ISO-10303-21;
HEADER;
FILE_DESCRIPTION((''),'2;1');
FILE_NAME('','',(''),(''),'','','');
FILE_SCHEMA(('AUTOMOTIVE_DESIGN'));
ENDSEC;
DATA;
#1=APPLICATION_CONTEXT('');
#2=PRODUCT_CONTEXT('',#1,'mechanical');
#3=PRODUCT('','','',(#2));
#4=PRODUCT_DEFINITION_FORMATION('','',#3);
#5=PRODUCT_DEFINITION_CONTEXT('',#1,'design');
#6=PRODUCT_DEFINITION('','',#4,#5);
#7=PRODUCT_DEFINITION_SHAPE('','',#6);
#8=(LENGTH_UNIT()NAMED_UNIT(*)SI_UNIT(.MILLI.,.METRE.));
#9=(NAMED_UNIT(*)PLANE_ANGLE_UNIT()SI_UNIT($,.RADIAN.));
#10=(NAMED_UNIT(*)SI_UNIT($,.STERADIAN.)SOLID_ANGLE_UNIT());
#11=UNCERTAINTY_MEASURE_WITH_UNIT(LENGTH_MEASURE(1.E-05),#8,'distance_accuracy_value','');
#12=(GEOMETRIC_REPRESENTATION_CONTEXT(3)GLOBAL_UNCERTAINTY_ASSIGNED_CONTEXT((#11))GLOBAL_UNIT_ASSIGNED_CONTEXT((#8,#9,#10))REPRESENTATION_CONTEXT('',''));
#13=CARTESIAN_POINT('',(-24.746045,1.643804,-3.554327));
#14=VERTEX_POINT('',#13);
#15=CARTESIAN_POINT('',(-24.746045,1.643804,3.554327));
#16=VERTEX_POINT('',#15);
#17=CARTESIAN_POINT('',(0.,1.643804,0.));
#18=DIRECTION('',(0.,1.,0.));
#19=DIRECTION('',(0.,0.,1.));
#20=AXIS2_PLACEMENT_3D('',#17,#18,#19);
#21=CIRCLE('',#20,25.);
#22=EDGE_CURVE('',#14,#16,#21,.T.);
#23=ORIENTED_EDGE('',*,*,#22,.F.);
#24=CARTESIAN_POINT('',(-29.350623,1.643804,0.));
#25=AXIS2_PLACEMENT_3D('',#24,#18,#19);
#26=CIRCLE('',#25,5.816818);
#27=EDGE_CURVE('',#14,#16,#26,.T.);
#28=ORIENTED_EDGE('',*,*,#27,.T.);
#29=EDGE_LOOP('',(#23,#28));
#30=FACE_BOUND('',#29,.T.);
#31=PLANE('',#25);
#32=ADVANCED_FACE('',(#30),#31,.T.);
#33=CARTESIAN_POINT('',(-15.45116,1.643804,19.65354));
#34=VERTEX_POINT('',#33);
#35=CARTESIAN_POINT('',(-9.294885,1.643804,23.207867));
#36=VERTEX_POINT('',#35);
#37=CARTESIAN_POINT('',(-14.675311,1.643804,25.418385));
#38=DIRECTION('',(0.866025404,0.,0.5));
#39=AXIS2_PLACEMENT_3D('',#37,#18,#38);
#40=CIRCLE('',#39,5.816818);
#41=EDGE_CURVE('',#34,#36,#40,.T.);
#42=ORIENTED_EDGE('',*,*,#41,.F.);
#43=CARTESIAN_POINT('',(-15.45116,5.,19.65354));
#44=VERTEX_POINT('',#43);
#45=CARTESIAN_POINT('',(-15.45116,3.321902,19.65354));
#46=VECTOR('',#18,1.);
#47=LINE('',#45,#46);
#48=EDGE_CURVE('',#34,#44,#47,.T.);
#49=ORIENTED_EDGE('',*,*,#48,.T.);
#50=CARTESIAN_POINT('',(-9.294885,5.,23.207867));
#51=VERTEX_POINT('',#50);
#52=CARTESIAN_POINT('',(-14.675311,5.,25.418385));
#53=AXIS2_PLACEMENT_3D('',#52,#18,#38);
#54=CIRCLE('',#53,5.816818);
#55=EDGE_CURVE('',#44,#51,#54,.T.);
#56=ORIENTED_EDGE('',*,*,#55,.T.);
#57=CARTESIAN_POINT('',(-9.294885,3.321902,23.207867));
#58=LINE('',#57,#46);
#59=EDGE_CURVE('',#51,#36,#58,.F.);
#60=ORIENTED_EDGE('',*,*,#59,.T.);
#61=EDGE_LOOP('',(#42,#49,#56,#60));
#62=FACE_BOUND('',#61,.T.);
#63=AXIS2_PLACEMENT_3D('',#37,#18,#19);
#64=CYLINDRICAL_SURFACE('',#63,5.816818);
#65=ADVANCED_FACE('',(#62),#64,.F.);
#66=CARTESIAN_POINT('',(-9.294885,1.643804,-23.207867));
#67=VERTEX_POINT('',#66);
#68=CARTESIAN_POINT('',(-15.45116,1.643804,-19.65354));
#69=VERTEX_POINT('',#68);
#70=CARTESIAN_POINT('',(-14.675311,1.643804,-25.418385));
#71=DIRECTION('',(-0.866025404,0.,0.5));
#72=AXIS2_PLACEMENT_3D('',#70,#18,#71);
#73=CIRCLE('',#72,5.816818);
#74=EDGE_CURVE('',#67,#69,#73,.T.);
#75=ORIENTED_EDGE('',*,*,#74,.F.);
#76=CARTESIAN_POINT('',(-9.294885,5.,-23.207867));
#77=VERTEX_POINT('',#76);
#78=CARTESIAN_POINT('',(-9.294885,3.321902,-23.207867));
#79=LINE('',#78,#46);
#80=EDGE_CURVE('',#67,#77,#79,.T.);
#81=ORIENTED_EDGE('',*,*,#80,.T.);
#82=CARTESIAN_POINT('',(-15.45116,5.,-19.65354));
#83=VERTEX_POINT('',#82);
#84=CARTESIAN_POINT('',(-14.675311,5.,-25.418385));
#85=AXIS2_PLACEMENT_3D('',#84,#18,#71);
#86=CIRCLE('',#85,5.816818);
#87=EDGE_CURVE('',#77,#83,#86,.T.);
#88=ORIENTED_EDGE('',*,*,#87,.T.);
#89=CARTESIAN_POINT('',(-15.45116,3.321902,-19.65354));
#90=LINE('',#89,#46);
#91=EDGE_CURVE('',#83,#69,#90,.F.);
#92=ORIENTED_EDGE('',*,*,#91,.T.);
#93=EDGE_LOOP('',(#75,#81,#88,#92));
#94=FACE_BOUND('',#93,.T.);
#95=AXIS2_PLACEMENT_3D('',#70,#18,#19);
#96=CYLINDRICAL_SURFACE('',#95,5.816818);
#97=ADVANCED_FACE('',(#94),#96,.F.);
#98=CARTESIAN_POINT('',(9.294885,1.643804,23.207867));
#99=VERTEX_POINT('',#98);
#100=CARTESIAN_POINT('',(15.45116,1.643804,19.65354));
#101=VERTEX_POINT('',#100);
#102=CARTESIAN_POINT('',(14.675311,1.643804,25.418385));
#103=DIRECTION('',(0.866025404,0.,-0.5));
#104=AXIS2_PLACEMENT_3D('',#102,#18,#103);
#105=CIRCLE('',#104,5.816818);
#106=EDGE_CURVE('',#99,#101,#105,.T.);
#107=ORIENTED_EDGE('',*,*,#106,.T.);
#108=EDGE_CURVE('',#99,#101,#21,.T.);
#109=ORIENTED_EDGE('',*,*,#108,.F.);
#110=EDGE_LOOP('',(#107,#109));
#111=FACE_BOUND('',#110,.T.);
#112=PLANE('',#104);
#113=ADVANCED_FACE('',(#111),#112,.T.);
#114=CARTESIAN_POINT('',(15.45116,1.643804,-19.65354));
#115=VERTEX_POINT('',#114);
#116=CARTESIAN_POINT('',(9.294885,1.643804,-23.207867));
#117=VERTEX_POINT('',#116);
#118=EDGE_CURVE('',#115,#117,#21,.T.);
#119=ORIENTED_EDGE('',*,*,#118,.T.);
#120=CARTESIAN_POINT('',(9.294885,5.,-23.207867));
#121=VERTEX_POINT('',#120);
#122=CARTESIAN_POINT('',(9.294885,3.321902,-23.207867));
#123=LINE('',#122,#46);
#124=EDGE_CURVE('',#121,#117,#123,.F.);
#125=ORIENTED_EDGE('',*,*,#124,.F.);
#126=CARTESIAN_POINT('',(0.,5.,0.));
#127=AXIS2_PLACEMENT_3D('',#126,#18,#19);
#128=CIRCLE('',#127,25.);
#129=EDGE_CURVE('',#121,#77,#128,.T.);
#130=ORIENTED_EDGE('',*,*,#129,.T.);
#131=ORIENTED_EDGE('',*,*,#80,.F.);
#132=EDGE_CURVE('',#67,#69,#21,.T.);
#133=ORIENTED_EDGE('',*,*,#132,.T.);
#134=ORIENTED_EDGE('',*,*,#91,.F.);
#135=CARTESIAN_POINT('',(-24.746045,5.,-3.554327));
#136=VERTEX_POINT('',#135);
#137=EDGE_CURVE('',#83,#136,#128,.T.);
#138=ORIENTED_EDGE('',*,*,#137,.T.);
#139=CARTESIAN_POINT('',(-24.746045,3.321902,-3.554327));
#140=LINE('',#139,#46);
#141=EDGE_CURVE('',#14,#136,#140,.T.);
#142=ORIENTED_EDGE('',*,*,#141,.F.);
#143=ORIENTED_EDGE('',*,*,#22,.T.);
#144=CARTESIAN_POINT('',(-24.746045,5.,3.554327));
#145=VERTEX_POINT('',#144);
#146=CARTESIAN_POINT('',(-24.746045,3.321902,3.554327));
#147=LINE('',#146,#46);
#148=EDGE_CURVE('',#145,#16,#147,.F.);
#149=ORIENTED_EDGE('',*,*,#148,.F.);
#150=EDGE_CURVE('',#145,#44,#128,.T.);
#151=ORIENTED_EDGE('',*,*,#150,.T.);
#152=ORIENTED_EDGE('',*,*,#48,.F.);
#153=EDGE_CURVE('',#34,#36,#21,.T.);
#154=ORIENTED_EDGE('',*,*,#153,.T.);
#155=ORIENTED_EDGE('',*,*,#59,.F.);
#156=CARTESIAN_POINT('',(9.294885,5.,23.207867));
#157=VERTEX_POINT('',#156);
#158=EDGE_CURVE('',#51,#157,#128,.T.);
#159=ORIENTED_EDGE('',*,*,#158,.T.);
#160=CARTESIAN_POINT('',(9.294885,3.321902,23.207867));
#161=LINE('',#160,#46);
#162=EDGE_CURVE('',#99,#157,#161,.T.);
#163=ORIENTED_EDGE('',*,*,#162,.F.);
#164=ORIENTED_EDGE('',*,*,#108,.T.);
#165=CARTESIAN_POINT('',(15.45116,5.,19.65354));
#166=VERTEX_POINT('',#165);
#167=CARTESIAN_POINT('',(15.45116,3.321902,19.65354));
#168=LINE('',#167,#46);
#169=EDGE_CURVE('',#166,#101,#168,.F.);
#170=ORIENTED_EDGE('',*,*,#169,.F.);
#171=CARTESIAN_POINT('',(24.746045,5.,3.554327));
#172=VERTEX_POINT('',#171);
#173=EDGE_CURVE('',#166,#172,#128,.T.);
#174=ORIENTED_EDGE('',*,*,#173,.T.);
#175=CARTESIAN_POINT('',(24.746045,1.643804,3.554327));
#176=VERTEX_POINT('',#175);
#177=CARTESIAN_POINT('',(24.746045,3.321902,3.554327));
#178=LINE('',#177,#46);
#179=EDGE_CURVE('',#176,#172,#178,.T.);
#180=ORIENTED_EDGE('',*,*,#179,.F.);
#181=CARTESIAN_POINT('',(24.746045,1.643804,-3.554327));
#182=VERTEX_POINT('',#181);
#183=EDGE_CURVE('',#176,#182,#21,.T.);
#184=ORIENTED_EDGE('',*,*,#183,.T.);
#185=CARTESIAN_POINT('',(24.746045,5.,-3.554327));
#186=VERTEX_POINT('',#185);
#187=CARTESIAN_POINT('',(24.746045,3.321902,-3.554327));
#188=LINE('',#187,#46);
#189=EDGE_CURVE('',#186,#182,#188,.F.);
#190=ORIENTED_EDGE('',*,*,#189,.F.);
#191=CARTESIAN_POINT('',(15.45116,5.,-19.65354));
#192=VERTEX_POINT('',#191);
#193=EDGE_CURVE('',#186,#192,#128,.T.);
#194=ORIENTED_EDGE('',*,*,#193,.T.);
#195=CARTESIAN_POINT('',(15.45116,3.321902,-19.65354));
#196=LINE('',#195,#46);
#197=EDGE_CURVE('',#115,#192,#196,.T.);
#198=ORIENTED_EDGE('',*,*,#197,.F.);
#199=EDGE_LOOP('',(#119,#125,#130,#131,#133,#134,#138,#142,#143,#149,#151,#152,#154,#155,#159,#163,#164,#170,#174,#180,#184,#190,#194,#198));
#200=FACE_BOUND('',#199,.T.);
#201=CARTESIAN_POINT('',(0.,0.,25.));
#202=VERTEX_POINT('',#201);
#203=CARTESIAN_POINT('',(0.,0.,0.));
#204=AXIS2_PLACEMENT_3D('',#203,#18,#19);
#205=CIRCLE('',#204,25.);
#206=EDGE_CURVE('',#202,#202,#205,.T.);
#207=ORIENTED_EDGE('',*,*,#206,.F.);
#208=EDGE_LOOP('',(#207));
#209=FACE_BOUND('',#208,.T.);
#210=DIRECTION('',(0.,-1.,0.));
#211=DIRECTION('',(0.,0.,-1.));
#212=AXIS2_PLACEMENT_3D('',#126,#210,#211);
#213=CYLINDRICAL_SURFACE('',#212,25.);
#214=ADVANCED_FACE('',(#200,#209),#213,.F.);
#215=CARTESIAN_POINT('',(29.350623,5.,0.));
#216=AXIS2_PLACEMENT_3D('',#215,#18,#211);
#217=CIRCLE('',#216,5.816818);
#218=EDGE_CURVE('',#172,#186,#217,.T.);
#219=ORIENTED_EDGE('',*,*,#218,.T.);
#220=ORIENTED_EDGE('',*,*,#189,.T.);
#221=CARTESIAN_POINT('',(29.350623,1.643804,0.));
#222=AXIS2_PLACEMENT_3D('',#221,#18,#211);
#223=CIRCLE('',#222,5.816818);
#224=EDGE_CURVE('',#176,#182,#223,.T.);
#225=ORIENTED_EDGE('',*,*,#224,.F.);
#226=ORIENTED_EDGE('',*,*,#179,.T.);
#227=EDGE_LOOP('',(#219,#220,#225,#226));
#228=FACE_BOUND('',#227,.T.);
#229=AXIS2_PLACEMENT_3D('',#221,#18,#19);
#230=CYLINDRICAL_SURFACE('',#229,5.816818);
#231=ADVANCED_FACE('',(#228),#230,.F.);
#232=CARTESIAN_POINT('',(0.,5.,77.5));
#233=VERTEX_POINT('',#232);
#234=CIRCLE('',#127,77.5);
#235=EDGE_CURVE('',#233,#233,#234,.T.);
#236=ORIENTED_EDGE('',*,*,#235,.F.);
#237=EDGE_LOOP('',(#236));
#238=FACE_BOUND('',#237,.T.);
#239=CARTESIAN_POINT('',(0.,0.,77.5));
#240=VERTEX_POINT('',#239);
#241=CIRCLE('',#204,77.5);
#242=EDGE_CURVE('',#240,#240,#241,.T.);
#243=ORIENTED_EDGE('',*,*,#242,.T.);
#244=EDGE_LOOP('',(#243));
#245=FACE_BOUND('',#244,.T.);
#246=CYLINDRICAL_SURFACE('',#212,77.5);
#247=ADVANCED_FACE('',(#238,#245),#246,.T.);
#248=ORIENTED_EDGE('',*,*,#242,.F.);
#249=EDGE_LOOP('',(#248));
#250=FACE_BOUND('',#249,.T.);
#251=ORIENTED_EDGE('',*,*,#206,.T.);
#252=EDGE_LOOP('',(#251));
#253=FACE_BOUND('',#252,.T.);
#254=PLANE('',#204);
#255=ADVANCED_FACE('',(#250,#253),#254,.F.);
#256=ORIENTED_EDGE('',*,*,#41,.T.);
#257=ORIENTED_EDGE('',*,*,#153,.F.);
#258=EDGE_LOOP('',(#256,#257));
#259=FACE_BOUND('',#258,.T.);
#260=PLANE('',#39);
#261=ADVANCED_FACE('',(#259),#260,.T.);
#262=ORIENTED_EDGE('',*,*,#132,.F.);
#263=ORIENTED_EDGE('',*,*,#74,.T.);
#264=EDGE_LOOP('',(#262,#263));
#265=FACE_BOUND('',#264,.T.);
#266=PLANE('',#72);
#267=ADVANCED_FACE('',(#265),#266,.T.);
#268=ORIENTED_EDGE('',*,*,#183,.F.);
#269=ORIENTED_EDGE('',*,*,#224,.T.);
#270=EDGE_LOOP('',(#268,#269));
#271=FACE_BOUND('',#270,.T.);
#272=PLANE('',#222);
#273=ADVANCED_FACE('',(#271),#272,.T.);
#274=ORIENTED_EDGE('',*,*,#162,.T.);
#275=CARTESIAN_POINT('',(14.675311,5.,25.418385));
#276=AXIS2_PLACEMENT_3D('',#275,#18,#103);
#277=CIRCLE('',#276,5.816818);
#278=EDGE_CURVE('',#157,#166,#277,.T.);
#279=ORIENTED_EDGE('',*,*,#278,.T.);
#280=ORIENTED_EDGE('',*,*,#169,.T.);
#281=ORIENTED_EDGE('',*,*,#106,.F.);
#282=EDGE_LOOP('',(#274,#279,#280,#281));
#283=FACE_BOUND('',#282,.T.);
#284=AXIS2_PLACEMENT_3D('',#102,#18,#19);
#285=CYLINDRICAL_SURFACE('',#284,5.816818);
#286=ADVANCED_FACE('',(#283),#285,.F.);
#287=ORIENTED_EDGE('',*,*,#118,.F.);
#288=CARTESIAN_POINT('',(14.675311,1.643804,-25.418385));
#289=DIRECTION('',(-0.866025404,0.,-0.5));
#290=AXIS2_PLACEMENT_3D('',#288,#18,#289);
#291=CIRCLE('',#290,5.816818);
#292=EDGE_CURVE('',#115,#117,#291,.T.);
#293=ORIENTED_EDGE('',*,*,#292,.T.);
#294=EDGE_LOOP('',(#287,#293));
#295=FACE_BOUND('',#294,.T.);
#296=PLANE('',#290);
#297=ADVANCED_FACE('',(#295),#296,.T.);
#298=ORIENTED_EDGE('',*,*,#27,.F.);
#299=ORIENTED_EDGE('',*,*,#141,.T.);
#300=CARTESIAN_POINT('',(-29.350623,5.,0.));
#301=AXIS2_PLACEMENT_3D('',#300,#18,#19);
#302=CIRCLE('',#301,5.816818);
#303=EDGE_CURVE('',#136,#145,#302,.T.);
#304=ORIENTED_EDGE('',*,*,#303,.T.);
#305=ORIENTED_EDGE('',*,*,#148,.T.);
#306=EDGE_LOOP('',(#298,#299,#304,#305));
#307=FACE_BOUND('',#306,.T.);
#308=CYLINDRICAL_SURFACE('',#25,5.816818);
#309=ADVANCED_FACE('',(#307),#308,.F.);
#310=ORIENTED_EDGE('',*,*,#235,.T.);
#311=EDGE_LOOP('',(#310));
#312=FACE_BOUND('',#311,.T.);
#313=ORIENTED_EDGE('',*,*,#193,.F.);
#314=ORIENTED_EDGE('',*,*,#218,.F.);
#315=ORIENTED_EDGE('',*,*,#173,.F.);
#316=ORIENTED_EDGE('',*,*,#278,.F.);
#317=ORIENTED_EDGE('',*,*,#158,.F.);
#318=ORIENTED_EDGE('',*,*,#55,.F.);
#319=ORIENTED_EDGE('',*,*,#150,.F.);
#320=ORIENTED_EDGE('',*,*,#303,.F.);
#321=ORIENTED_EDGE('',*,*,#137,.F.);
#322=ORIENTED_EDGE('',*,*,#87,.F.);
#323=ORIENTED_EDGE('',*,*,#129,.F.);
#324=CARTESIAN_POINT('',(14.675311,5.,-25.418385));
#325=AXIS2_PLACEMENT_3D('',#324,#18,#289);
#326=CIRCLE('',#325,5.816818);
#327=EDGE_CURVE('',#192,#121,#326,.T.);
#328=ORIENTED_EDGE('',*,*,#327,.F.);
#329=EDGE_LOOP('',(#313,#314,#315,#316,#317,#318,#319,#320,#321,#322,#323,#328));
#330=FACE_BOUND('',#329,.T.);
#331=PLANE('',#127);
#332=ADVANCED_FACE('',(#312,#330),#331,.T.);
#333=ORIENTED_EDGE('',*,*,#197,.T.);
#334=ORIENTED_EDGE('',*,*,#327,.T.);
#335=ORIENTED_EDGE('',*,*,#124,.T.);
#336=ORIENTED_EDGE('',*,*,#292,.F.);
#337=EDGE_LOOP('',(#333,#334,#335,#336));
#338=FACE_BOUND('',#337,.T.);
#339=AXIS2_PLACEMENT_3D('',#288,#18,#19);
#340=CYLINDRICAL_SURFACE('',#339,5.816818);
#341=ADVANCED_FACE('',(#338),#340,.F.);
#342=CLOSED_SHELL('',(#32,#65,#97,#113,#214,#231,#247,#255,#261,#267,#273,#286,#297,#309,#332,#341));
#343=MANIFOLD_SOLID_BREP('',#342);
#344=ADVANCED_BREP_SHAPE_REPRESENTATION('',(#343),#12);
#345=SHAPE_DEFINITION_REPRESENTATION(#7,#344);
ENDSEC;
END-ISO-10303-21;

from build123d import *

# Parameters (mm, degrees)
SKETCH1_R           = 77.5
BOSS_EXTRUDE1_DEPTH = 5
SKETCH2_R           = 25
CUT_EXTRUDE1_DEPTH  = 110.715541287
SKETCH3_R           = 5.816818437
CUT_EXTRUDE2_DEPTH  = 3.356195956
CIRPATTERN1_COUNT   = 6


with BuildPart() as part:
    # Sketch1 → Boss-Extrude1 (new body)
    with BuildSketch(Plane(origin=(0, 0, 0), x_dir=(1, 0, 0), z_dir=(0, 1, 0))):
        Circle(SKETCH1_R)
    extrude(amount=BOSS_EXTRUDE1_DEPTH)

    # Sketch2 → Cut-Extrude1 (cut, through all)
    with BuildSketch(Plane(origin=(0, 0, 0), x_dir=(1, 0, 0), z_dir=(0, 1, 0))):
        Circle(SKETCH2_R)
    extrude(amount=CUT_EXTRUDE1_DEPTH, mode=Mode.SUBTRACT)

    # Sketch3 → Cut-Extrude2 (cut)
    with BuildSketch(Plane(origin=(0, 5, 0), x_dir=(1, 0, 0), z_dir=(0, 1, 0))):
        with Locations((-29.350622892, 0)):
            Circle(SKETCH3_R)
    cut_extrude2 = extrude(amount=-CUT_EXTRUDE2_DEPTH, mode=Mode.SUBTRACT)

    # CirPattern1: Cut-Extrude2 ×6 about axis
    cirpattern1_axis = Axis((0, 0, 0), (0, 1, 0))
    for i in range(1, CIRPATTERN1_COUNT):
        add(cut_extrude2.rotate(cirpattern1_axis, i * 360 / CIRPATTERN1_COUNT), mode=Mode.SUBTRACT)


solid = part.part
